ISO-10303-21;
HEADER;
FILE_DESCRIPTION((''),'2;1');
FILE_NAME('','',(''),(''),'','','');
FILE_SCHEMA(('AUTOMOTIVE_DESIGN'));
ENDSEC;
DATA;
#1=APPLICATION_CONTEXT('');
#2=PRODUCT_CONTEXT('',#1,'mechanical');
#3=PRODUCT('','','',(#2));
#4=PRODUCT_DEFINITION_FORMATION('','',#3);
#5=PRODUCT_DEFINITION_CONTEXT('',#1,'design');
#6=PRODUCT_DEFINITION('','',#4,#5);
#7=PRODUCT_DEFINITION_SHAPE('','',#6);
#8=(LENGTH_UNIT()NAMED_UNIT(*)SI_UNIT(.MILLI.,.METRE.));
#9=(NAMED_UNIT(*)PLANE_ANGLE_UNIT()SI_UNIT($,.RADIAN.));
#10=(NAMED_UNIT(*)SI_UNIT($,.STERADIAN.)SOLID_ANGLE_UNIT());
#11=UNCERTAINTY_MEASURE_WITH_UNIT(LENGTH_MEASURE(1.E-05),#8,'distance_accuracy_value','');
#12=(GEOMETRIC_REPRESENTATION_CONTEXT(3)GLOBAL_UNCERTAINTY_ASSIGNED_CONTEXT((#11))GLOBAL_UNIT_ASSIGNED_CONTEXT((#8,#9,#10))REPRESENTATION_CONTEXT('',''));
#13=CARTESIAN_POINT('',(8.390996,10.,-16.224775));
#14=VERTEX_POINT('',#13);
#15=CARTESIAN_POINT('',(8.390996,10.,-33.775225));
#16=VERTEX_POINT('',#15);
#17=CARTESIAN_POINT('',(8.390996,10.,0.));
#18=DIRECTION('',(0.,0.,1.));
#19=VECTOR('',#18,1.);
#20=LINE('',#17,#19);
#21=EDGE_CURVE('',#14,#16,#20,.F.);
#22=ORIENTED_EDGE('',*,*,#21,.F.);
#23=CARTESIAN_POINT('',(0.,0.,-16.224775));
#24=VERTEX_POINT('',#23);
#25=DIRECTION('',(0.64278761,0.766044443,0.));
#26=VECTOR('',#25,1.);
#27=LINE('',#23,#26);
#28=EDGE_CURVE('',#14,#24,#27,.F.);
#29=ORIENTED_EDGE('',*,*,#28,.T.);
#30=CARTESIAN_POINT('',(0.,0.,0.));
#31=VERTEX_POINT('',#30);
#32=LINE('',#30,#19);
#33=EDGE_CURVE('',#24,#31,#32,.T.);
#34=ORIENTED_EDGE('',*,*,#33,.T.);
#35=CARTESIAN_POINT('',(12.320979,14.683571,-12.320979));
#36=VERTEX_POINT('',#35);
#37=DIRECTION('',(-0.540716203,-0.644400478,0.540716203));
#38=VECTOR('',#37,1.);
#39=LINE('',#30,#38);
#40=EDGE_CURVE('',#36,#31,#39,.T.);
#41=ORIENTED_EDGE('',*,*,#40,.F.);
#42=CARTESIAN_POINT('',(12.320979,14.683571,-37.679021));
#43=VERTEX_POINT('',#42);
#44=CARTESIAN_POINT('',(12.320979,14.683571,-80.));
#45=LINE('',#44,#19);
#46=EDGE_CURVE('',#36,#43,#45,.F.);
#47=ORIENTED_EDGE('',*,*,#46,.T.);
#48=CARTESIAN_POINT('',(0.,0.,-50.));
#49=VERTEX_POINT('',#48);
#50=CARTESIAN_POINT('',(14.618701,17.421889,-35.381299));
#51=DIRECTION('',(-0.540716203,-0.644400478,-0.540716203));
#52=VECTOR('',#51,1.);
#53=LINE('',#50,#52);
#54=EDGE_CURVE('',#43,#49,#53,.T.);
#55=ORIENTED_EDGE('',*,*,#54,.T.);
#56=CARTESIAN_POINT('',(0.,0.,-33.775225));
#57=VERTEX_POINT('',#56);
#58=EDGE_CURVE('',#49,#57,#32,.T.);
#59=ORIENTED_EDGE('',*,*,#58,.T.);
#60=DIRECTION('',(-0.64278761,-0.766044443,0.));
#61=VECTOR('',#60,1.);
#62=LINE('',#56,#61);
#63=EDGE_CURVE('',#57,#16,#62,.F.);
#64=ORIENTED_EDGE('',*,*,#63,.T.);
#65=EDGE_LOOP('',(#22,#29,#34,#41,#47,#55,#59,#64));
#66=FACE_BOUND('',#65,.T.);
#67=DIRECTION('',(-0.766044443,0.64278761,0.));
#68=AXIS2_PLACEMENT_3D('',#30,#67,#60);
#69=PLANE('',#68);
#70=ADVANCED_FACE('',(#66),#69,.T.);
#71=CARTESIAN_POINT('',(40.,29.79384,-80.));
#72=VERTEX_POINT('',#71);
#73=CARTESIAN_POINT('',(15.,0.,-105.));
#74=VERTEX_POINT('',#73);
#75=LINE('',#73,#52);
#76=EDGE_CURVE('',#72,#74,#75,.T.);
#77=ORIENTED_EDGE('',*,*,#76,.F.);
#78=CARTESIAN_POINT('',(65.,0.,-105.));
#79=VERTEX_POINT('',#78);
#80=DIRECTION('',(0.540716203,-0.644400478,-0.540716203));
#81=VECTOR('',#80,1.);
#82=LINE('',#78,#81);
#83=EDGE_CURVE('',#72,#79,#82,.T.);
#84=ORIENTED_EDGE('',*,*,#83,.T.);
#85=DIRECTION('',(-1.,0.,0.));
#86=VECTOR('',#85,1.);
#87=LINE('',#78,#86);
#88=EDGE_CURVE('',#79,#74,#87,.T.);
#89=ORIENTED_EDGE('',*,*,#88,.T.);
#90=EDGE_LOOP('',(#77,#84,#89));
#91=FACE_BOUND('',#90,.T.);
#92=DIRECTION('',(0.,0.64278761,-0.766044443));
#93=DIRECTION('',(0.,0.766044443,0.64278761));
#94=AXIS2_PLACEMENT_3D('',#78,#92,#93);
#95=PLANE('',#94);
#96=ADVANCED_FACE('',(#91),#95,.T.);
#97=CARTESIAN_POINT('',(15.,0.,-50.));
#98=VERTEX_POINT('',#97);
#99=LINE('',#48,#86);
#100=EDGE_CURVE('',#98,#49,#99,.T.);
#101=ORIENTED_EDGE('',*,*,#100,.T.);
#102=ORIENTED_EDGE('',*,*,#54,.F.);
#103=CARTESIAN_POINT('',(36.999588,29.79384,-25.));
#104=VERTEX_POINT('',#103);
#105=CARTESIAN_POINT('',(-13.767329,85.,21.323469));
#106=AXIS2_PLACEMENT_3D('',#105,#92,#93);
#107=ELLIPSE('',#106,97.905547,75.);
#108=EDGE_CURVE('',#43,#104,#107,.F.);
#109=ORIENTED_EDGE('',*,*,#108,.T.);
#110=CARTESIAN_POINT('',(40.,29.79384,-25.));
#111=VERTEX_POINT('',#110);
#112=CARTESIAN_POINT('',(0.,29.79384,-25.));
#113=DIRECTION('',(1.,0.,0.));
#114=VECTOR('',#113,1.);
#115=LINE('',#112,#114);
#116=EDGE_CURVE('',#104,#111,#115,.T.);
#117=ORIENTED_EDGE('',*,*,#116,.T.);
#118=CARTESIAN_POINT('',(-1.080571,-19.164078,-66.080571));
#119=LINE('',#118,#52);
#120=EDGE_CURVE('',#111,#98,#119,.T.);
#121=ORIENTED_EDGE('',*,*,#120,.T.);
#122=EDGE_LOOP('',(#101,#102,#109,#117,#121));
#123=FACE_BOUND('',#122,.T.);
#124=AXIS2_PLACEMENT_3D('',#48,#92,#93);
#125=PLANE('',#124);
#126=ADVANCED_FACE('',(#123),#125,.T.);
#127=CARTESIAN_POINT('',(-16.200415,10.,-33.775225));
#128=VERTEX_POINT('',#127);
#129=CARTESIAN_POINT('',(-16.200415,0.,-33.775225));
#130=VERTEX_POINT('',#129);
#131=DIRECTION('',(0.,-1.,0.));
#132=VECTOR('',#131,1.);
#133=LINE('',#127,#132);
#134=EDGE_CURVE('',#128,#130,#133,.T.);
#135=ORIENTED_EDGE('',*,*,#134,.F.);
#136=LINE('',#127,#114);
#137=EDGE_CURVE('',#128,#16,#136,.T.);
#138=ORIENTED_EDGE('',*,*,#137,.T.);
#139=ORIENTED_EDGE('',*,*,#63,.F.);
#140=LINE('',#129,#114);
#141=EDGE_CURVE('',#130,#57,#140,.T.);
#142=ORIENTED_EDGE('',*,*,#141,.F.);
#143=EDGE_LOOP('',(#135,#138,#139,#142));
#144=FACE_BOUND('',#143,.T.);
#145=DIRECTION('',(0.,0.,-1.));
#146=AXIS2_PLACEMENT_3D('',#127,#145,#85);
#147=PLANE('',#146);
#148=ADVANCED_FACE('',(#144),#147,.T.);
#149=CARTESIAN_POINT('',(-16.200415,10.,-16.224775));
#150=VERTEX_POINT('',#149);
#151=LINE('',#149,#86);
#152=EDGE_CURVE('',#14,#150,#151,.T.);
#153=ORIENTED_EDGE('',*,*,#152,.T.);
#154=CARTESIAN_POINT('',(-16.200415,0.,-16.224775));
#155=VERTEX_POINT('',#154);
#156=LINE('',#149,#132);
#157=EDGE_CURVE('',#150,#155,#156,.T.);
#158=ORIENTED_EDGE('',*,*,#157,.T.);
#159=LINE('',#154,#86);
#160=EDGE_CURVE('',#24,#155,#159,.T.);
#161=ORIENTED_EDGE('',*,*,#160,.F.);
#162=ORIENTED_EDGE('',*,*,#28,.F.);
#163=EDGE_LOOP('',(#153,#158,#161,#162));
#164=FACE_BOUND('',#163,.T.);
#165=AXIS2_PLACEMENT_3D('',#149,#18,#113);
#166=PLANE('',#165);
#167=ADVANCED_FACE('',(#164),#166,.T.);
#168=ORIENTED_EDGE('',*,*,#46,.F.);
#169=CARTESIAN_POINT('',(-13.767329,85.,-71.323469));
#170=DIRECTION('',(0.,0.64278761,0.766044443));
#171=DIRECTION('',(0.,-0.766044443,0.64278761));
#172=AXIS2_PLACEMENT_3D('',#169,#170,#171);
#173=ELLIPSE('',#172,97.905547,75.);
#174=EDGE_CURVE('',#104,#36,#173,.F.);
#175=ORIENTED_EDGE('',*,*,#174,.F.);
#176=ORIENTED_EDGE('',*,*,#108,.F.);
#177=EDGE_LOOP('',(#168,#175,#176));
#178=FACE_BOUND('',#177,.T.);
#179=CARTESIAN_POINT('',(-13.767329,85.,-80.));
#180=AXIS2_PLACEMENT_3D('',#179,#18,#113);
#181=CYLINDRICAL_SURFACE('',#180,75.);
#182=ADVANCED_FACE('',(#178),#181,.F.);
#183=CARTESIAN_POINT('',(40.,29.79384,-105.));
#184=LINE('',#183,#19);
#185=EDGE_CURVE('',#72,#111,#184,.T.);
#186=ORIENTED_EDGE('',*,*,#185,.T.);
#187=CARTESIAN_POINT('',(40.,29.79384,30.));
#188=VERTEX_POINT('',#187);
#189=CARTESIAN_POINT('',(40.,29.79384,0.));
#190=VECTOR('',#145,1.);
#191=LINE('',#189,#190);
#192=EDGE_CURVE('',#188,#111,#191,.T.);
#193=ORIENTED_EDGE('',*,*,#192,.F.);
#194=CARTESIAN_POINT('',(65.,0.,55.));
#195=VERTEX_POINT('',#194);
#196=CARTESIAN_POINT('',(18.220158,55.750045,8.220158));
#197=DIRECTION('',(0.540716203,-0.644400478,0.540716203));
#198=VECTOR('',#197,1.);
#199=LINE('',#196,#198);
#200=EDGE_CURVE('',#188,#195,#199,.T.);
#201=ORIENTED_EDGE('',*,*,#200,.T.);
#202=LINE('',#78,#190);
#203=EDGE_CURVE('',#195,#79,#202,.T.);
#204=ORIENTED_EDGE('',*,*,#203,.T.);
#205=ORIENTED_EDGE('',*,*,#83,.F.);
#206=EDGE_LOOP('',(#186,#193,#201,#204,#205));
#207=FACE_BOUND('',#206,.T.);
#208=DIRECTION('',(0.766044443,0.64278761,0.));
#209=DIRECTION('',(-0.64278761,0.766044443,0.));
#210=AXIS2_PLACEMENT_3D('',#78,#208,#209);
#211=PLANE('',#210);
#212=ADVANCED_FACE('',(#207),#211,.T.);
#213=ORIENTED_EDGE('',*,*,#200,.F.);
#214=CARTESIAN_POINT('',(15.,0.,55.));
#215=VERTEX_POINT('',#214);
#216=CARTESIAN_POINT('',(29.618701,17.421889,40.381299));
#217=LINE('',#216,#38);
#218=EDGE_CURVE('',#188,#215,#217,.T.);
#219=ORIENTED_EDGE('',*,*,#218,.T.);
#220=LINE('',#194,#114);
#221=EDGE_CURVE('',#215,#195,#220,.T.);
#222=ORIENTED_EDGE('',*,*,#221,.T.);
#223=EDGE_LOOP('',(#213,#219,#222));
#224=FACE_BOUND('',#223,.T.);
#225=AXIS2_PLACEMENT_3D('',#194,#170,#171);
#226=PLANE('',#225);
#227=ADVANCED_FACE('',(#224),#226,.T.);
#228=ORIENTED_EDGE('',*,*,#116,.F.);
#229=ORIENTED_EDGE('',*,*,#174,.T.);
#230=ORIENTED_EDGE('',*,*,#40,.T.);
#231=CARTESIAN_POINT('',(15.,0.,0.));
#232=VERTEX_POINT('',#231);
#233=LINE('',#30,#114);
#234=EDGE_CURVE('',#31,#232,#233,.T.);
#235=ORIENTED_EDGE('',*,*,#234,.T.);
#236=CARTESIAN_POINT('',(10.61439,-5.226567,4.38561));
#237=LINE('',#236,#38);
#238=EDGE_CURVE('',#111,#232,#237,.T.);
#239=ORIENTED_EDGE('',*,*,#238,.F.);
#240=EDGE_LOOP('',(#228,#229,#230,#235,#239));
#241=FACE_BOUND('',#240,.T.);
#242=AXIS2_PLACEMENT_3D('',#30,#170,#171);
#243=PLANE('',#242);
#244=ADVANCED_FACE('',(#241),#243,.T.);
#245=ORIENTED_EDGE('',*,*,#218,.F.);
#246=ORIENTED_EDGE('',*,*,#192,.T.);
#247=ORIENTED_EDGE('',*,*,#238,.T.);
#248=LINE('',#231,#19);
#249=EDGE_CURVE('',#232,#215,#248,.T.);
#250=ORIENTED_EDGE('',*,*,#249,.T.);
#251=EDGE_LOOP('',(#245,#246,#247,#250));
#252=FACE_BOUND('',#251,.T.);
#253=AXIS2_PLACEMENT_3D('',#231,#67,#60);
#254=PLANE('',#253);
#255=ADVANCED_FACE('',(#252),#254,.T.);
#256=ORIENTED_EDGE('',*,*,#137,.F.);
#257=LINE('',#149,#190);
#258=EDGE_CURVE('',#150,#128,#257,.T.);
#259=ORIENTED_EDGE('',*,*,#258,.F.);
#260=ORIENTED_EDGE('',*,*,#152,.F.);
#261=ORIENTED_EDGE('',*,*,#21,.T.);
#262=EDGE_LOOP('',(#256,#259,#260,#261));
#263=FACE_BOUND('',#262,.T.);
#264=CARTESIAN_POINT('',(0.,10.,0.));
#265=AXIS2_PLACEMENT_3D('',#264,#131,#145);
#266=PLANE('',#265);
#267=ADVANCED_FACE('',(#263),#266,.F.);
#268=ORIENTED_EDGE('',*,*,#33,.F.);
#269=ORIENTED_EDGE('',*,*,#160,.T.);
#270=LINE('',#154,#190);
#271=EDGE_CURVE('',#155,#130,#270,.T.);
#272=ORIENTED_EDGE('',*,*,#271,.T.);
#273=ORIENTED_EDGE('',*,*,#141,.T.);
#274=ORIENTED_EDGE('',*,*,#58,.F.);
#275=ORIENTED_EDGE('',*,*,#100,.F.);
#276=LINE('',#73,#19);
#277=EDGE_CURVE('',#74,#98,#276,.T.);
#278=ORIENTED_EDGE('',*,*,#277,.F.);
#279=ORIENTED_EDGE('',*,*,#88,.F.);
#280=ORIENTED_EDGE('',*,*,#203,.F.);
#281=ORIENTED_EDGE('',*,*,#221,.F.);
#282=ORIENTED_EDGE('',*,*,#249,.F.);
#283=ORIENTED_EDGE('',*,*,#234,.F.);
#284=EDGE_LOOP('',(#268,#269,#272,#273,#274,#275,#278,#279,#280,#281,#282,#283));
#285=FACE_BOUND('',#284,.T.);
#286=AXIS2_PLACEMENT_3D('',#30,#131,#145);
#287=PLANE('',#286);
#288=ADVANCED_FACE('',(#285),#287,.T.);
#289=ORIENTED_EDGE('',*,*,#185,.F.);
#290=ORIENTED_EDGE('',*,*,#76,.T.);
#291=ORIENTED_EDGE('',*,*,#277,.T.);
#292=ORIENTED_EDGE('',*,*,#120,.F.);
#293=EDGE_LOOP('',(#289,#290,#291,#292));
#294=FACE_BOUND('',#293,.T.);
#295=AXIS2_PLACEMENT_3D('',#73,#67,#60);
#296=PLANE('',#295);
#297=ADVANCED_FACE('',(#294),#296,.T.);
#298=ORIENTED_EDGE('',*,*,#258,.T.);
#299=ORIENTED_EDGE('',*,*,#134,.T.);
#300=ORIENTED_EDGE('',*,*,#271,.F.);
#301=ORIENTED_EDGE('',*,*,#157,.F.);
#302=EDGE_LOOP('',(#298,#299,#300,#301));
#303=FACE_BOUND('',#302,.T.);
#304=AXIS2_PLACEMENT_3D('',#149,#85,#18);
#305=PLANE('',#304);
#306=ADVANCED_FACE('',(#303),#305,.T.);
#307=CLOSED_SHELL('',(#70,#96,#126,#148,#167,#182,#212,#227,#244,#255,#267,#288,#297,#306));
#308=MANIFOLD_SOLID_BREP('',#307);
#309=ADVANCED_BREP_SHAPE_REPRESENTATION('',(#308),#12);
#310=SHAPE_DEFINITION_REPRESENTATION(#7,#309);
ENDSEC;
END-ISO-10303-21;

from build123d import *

# Parameters (mm, degrees)
BOSS_EXTRUDE1_START       = -105
BOSS_EXTRUDE1_DEPTH       = 160
BOSS_EXTRUDE1_2_DEPTH     = 40
BOSS_EXTRUDE1_START_2     = -20
BOSS_EXTRUDE1_3_OUTLINE_W = 47
BOSS_EXTRUDE1_3_OUTLINE_H = 147
BOSS_EXTRUDE1_3_DEPTH     = 20
BOSS_EXTRUDE1_START_3     = 42.132444372
BOSS_EXTRUDE1_4_OUTLINE_W = 53
BOSS_EXTRUDE1_4_OUTLINE_H = 116
BOSS_EXTRUDE1_4_DEPTH     = 19.867555628
BOSS_EXTRUDE1_START_4     = 80.434666527
BOSS_EXTRUDE1_5_OUTLINE_W = 52
BOSS_EXTRUDE1_5_OUTLINE_H = 117
BOSS_EXTRUDE1_5_DEPTH     = 20.565333473
SKETCH2_W                 = 32.400830654
SKETCH2_H                 = 17.550449938
BOSS_EXTRUDE2_DEPTH       = 10
SKETCH4_R                 = 75
CUT_EXTRUDE1_DEPTH        = 80


with BuildPart() as part:
    # Boss-Extrude1: read off the stored shape, not the designer's step
    # Boss-Extrude1 outline → Boss-Extrude1 (new body)
    with BuildSketch(Plane.XY.offset(BOSS_EXTRUDE1_START)):
        Polygon((65, 0), (40, 29.793839815), (15, 0), align=None)
    extrude(amount=BOSS_EXTRUDE1_DEPTH)

    # Boss-Extrude1 2 outline → Boss-Extrude1 2 (add)
    with BuildSketch(Plane.YZ):
        Polygon((0, -50), (29.793839815, -25), (0, 0), align=None)
    extrude(amount=BOSS_EXTRUDE1_2_DEPTH)

    # Boss-Extrude1 3 outline → Boss-Extrude1 3 (cut)
    with BuildSketch(Plane(origin=(0, 0, 0), x_dir=(0.6427876096865404, 0.7660444431189772, 0), z_dir=(0.7660444431189772, -0.6427876096865403, 0)).offset(BOSS_EXTRUDE1_START_2)):
        with Locations((22.5, -24.5)):
            Rectangle(BOSS_EXTRUDE1_3_OUTLINE_W, BOSS_EXTRUDE1_3_OUTLINE_H)
    extrude(amount=BOSS_EXTRUDE1_3_DEPTH, mode=Mode.SUBTRACT)

    # Boss-Extrude1 4 outline → Boss-Extrude1 4 (cut)
    with BuildSketch(Plane(origin=(0, 0, 0), x_dir=(1, 0, 0), z_dir=(0, 0.6427876096865403, 0.7660444431189772)).offset(BOSS_EXTRUDE1_START_3)):
        with Locations((40.5, 21)):
            Rectangle(BOSS_EXTRUDE1_4_OUTLINE_W, BOSS_EXTRUDE1_4_OUTLINE_H)
    extrude(amount=BOSS_EXTRUDE1_4_DEPTH, mode=Mode.SUBTRACT)

    # Boss-Extrude1 5 outline → Boss-Extrude1 5 (cut)
    with BuildSketch(Plane(origin=(0, 0, 0), x_dir=(1, 0, 0), z_dir=(0, 0.6427876096865403, -0.7660444431189772)).offset(BOSS_EXTRUDE1_START_4)):
        with Locations((40, 10.5)):
            Rectangle(BOSS_EXTRUDE1_5_OUTLINE_W, BOSS_EXTRUDE1_5_OUTLINE_H)
    extrude(amount=BOSS_EXTRUDE1_5_DEPTH, mode=Mode.SUBTRACT)

    # Sketch2 → Boss-Extrude2 (add)
    with BuildSketch(Plane.XZ):
        with Locations((0, -25)):
            Rectangle(SKETCH2_W, SKETCH2_H)
    extrude(amount=-BOSS_EXTRUDE2_DEPTH)

    # Sketch4 → Cut-Extrude1 (cut, symmetric)
    with BuildSketch(Plane.XY):
        with Locations((-13.767329279, 85)):
            Circle(SKETCH4_R)
    extrude(amount=CUT_EXTRUDE1_DEPTH, both=True, mode=Mode.SUBTRACT)


solid = part.part
